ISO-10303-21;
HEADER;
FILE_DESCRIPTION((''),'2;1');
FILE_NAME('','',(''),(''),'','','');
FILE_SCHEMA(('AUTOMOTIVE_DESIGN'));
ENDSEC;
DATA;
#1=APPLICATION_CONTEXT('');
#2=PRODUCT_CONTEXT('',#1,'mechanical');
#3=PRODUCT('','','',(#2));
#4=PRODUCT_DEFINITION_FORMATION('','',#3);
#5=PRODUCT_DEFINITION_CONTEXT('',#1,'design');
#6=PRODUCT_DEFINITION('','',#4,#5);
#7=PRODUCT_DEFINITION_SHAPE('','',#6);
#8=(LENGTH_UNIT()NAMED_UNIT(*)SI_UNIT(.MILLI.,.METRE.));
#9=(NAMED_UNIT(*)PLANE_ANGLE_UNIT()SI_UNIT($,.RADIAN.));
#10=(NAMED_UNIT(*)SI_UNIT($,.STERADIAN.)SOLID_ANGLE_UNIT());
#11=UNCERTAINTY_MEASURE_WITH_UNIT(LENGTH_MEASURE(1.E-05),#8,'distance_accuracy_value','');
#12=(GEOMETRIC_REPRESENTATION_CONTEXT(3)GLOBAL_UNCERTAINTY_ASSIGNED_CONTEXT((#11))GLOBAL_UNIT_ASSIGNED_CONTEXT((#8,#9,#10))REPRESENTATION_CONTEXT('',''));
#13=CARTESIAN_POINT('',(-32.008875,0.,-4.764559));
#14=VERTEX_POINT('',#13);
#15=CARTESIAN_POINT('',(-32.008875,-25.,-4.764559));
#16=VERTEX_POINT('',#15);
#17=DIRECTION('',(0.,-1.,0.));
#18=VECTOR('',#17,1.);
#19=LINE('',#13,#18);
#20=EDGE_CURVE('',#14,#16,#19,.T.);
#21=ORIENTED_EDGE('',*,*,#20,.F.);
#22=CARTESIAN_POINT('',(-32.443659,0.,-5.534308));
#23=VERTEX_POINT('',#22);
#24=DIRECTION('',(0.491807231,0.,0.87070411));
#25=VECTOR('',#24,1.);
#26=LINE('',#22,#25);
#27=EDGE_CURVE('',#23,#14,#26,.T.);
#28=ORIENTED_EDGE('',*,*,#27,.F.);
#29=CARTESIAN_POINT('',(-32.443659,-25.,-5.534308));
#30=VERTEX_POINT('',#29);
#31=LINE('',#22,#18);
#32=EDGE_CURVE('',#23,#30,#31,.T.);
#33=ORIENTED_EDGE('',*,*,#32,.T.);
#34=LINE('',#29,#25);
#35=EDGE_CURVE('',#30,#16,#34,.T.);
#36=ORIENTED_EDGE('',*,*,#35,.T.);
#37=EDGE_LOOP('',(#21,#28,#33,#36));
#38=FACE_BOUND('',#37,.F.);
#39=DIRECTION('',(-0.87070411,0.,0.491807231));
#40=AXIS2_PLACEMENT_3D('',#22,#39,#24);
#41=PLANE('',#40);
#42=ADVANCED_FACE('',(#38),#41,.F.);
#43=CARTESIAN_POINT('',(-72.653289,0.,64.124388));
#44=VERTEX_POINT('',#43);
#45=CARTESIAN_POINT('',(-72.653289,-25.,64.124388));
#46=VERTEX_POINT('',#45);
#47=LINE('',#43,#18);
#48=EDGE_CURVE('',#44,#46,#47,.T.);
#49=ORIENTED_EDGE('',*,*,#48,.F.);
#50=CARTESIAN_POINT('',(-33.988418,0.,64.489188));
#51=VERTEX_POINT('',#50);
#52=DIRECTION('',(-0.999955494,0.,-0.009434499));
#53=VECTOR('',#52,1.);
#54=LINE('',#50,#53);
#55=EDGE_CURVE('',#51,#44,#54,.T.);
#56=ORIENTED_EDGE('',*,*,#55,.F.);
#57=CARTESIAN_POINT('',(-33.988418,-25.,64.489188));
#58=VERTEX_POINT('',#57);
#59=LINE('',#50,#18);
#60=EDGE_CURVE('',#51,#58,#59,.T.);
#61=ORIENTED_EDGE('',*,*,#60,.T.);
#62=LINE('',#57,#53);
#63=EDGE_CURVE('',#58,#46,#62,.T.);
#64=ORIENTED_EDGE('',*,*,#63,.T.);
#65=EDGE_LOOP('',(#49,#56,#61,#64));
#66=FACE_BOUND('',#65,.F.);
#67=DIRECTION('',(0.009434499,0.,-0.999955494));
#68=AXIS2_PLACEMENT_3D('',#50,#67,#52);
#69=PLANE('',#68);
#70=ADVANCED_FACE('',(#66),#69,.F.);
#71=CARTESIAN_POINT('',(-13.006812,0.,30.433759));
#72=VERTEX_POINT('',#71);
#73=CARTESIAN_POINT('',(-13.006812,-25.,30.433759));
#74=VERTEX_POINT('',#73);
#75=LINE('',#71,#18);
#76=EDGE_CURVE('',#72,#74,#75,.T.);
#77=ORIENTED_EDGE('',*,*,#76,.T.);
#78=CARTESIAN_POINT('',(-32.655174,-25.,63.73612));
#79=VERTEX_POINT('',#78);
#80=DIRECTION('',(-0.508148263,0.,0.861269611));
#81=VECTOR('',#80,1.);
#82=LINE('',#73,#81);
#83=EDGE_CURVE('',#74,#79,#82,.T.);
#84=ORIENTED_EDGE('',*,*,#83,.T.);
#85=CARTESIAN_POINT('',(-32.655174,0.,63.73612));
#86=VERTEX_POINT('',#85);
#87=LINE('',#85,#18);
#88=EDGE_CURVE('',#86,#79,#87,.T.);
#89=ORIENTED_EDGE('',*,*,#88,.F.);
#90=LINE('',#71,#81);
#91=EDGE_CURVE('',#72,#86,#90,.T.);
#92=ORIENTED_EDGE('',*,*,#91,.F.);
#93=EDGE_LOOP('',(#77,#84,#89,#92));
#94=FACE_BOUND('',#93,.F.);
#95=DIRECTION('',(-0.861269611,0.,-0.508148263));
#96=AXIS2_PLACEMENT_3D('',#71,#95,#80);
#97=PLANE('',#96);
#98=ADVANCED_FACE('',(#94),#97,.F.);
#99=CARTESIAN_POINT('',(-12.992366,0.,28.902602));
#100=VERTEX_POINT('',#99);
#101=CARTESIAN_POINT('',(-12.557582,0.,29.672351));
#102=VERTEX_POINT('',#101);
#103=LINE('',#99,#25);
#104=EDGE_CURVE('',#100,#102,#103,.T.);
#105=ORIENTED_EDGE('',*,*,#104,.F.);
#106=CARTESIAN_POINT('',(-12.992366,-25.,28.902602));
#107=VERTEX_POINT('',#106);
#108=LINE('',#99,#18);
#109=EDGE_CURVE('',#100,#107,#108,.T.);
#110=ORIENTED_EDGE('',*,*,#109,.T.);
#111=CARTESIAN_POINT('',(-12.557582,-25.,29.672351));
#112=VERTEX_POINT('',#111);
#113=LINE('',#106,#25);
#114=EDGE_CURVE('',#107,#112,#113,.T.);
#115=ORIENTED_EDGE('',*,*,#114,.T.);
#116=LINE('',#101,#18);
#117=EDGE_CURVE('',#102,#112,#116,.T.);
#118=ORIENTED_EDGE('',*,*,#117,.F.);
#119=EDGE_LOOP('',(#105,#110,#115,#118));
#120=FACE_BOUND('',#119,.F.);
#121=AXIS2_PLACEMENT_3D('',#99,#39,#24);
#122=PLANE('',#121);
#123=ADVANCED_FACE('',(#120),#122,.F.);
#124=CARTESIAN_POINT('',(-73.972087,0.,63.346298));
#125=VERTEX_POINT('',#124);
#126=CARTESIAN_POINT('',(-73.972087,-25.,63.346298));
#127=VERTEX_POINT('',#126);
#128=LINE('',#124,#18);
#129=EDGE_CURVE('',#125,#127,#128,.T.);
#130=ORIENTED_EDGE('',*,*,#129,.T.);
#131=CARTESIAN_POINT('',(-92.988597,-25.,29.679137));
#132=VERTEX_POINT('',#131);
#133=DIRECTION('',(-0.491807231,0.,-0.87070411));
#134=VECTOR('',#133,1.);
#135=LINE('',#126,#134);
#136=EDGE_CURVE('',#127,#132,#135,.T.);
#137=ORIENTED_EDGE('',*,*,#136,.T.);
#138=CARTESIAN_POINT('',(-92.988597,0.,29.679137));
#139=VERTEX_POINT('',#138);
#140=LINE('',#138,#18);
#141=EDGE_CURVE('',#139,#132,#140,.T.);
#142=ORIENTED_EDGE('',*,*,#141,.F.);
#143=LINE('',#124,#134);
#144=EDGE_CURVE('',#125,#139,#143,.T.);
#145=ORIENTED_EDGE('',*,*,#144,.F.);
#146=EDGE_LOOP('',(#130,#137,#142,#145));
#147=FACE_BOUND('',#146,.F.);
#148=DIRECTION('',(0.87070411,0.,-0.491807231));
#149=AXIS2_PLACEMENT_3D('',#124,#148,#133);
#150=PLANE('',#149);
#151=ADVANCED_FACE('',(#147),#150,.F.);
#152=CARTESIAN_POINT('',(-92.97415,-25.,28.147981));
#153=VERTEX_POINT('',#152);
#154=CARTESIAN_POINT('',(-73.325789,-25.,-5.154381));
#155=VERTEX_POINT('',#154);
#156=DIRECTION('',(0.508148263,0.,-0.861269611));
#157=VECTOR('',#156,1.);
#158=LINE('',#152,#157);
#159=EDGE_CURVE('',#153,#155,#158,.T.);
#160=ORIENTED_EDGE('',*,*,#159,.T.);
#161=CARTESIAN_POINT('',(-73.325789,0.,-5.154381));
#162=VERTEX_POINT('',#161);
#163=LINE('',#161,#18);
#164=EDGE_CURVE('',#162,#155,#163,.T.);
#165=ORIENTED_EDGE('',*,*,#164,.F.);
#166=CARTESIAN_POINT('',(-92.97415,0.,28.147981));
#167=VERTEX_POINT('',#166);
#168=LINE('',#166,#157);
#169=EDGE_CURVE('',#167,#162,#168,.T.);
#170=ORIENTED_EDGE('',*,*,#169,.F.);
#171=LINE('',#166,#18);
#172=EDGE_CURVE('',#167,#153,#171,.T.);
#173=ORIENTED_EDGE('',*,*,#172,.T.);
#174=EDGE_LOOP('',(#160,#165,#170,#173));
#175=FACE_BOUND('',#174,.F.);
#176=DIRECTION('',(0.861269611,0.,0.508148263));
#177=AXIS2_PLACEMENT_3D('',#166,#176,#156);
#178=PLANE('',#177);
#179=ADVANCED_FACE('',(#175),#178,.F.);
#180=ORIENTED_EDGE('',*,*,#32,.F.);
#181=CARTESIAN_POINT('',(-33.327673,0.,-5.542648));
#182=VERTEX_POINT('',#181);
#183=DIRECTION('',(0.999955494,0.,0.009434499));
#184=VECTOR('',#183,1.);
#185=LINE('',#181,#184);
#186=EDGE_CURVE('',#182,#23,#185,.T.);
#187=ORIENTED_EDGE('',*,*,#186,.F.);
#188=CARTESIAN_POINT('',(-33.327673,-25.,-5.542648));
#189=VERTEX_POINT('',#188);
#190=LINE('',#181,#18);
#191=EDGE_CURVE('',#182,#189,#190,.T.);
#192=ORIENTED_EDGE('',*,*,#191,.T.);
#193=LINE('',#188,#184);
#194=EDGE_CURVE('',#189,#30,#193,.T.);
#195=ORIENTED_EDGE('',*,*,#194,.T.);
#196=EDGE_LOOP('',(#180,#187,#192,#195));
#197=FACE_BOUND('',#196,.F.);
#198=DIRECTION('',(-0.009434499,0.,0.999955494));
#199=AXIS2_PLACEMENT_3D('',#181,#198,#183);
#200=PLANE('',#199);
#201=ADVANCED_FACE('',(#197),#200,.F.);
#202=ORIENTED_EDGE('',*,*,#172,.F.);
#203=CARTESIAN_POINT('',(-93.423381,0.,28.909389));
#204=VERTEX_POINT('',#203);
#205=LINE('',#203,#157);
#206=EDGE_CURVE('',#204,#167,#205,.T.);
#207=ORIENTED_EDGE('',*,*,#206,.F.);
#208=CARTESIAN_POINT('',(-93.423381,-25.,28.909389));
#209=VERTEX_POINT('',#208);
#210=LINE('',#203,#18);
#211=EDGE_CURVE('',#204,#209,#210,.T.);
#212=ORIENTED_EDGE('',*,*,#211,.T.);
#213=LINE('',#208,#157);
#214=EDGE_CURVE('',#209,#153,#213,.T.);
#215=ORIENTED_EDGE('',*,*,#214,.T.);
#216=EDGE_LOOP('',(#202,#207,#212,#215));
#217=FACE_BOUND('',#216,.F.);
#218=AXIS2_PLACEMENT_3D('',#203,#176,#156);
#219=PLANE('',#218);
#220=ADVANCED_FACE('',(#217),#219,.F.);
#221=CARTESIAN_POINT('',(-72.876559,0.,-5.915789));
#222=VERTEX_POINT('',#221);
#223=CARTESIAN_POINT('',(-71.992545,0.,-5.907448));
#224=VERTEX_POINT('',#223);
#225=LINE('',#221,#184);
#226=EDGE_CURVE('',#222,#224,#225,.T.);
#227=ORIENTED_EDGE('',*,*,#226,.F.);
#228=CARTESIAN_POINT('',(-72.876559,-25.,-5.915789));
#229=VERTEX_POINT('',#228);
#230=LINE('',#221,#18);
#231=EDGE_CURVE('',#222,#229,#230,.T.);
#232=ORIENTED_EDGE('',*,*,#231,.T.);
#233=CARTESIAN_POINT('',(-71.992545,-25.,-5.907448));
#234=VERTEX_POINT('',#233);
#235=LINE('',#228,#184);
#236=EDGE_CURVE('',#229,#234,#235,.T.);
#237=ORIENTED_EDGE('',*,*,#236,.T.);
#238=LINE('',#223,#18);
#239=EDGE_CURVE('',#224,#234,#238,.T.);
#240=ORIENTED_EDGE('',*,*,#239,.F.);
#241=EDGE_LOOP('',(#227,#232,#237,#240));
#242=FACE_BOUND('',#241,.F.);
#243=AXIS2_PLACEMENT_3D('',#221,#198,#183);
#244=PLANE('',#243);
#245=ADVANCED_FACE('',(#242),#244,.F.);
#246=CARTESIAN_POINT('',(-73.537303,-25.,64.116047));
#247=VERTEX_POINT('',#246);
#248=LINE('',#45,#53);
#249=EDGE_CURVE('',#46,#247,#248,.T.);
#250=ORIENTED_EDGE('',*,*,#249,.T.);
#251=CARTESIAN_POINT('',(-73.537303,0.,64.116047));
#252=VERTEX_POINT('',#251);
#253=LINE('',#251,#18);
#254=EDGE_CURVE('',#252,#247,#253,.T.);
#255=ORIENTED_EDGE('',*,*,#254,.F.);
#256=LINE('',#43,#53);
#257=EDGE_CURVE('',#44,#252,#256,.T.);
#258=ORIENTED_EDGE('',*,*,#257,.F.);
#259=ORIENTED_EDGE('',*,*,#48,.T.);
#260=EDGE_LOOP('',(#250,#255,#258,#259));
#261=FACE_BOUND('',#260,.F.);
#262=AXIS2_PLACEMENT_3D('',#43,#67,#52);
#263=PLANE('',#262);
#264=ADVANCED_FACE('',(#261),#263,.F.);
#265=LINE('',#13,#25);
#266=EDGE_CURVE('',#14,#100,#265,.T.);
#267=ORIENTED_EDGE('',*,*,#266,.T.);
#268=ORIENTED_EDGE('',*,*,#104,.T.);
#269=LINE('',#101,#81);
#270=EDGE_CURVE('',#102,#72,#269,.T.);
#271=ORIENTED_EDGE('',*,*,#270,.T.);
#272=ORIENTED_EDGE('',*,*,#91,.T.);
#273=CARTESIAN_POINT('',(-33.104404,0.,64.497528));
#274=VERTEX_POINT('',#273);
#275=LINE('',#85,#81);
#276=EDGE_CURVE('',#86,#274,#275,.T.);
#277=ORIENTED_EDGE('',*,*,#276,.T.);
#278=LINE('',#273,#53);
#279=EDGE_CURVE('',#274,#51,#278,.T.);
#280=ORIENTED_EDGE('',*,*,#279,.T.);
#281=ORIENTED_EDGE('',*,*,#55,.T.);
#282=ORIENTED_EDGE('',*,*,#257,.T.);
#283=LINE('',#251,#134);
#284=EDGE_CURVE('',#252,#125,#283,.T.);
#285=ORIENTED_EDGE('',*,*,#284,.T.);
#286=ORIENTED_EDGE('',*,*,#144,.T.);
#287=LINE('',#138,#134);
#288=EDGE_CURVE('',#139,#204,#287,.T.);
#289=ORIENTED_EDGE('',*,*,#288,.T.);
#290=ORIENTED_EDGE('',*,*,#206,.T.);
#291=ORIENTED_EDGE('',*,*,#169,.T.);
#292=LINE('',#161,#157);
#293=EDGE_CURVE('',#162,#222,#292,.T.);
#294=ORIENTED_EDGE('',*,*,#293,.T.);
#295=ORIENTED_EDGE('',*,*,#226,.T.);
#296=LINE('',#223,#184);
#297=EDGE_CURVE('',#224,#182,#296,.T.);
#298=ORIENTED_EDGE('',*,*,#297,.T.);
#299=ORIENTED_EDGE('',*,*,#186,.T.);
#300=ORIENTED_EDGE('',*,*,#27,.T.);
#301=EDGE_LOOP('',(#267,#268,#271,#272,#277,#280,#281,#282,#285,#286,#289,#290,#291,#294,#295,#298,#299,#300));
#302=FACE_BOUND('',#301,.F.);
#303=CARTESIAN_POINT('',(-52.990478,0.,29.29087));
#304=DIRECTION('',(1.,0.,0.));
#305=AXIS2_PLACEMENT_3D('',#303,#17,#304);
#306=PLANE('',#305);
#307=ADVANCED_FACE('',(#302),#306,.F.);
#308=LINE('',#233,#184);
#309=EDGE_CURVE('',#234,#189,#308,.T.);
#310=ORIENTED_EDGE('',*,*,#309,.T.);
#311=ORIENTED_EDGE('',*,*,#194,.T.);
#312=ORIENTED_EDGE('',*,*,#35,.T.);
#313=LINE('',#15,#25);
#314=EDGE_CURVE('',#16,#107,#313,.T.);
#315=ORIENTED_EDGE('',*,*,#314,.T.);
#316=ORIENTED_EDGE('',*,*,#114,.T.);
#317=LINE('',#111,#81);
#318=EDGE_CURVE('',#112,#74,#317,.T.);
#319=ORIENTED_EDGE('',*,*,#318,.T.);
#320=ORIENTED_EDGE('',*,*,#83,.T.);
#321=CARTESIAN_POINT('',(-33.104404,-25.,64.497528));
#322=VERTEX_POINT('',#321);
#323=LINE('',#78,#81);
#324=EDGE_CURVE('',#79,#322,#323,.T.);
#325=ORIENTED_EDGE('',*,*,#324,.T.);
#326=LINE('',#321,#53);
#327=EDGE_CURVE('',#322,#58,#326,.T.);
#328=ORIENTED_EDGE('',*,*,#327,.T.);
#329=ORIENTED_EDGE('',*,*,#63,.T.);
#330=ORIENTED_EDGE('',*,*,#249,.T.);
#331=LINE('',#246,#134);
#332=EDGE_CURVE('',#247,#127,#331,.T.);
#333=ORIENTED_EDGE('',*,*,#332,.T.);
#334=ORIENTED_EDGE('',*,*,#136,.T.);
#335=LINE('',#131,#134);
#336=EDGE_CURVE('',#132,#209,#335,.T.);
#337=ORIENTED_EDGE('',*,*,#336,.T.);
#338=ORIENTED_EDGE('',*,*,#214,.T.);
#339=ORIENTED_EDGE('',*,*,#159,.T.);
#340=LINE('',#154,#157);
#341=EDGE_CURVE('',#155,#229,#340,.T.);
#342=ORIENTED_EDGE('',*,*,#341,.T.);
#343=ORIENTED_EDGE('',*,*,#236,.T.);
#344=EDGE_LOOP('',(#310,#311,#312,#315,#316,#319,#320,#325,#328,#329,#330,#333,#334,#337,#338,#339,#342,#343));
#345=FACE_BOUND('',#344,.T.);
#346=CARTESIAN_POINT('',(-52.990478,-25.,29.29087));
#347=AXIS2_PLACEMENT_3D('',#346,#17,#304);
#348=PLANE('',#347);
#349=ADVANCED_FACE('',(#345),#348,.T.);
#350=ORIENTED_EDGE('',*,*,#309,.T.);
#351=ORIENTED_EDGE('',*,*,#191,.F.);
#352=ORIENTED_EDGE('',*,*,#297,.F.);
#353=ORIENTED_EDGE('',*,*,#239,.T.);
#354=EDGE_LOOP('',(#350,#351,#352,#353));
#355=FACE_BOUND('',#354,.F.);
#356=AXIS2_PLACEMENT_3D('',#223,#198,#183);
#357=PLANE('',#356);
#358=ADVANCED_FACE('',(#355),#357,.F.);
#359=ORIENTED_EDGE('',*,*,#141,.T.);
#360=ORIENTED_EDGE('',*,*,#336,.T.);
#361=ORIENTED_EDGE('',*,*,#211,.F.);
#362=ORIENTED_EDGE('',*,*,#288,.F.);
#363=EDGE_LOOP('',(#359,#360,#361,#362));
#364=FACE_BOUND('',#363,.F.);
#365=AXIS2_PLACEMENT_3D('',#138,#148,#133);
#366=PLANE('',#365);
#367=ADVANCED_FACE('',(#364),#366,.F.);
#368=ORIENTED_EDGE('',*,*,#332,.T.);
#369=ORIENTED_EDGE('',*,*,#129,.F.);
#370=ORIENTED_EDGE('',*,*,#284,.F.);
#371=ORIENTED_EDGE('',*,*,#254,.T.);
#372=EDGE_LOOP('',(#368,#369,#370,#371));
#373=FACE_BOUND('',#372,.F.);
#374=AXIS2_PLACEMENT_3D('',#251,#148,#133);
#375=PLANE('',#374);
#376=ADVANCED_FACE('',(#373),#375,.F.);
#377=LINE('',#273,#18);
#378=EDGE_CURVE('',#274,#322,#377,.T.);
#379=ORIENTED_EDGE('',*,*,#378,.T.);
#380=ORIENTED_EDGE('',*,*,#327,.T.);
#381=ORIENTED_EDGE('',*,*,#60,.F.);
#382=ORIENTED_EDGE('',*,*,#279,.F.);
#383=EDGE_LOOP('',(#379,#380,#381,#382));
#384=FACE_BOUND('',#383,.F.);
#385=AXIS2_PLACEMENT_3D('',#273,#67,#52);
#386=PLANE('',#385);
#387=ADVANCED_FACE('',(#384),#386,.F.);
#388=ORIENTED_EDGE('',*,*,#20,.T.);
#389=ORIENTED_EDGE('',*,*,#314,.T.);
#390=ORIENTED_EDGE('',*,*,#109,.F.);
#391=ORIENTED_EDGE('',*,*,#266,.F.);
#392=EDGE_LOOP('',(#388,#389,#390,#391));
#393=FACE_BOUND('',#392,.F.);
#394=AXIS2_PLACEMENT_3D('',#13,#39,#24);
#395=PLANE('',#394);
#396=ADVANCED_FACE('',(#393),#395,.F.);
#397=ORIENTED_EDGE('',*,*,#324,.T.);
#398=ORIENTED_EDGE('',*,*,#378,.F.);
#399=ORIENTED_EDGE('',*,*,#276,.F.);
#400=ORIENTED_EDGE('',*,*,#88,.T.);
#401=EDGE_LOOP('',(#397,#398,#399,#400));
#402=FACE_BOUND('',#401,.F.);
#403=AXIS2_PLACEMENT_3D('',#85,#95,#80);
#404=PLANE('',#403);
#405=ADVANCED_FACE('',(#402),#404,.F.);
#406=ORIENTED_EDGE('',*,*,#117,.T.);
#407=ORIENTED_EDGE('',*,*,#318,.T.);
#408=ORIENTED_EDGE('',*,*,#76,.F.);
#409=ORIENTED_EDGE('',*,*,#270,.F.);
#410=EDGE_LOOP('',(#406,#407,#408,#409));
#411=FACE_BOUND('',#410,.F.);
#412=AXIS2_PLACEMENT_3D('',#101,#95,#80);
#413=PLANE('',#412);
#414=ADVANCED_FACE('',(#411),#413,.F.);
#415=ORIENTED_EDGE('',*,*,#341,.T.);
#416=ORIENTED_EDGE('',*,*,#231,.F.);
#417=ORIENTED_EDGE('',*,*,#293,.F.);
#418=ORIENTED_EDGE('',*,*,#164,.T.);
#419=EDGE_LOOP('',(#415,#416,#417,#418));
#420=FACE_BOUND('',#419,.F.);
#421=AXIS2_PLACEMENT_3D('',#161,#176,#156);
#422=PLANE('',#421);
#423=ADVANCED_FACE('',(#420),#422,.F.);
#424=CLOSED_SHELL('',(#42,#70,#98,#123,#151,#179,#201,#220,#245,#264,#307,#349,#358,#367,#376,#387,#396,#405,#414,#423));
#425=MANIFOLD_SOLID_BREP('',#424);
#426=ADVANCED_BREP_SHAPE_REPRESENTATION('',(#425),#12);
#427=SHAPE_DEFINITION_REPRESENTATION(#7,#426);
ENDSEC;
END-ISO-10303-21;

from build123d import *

# Parameters (mm, degrees)
F1_DEPTH = 25


with BuildPart() as f1:
    # F0 (on Front) → F1 (new body)
    with BuildSketch(Plane.XZ):
        with BuildLine():
            ThreePointArc((-12.9923656989, 28.902602186), (-12.9909523706, 29.0967337225), (-12.9904812574, 29.290869832))
            ThreePointArc((-12.9904812574, 29.290869832), (-12.9945641617, 29.8623728238), (-13.0068120409, 30.4337591459))
            Line((-13.0068120409, 30.4337591459), (-32.6551738333, 63.7361201862))
            ThreePointArc((-32.6551738333, 63.7361201862), (-33.3181920134, 64.1190342382), (-33.9884178287, 64.489187767))
            Line((-33.9884178287, 64.489187767), (-72.6532893918, 64.1243878322))
            ThreePointArc((-72.6532893918, 64.1243878322), (-73.3164117783, 63.741654271), (-73.9720870452, 63.3462984531))
            Line((-73.9720870452, 63.3462984531), (-92.988596816, 29.679137478))
            ThreePointArc((-92.988596816, 29.679137478), (-92.9887010223, 28.9134898649), (-92.974150474, 28.1479805181))
            Line((-92.974150474, 28.1479805181), (-73.3257886816, -5.1543805222))
            ThreePointArc((-73.3257886816, -5.1543805222), (-72.6627705014, -5.5372945741), (-71.9925446861, -5.9074481029))
            Line((-71.9925446861, -5.9074481029), (-33.3276731231, -5.5426481682))
            ThreePointArc((-33.3276731231, -5.5426481682), (-32.6645507366, -5.1599146069), (-32.0088754696, -4.764558789))
            Line((-32.0088754696, -4.764558789), (-12.9923656989, 28.902602186))
        make_face()
        with BuildLine():
            ThreePointArc((-13.0068120409, 30.4337591459), (-12.9945641617, 29.8623728238), (-12.9904812574, 29.290869832))
            ThreePointArc((-12.9904812574, 29.290869832), (-12.9909523706, 29.0967337225), (-12.9923656989, 28.902602186))
            Line((-12.9923656989, 28.902602186), (-12.5575819284, 29.6723509657))
            Line((-12.5575819284, 29.6723509657), (-13.0068120409, 30.4337591459))
        make_face()
        with BuildLine():
            ThreePointArc((-33.9884178287, 64.489187767), (-33.3181920134, 64.1190342382), (-32.6551738333, 63.7361201862))
            Line((-32.6551738333, 63.7361201862), (-33.1044039458, 64.4975283665))
            Line((-33.1044039458, 64.4975283665), (-33.9884178287, 64.489187767))
        make_face()
        with BuildLine():
            Line((-32.4436592401, -5.5343075687), (-32.0088754696, -4.764558789))
            ThreePointArc((-32.0088754696, -4.764558789), (-32.6645507366, -5.1599146069), (-33.3276731231, -5.5426481682))
            Line((-33.3276731231, -5.5426481682), (-32.4436592401, -5.5343075687))
        make_face()
        with BuildLine():
            ThreePointArc((-73.9720870452, 63.3462984531), (-73.3164117783, 63.741654271), (-72.6532893918, 64.1243878322))
            Line((-72.6532893918, 64.1243878322), (-73.5373032748, 64.1160472328))
            Line((-73.5373032748, 64.1160472328), (-73.9720870452, 63.3462984531))
        make_face()
        with BuildLine():
            Line((-72.8765585691, -5.9157887024), (-71.9925446861, -5.9074481029))
            ThreePointArc((-71.9925446861, -5.9074481029), (-72.6627705014, -5.5372945741), (-73.3257886816, -5.1543805222))
            Line((-73.3257886816, -5.1543805222), (-72.8765585691, -5.9157887024))
        make_face()
        with BuildLine():
            ThreePointArc((-92.974150474, 28.1479805181), (-92.9887010223, 28.9134898649), (-92.988596816, 29.679137478))
            Line((-92.988596816, 29.679137478), (-93.4233805865, 28.9093886984))
            Line((-93.4233805865, 28.9093886984), (-92.974150474, 28.1479805181))
        make_face()
    extrude(amount=F1_DEPTH)


solid = f1.part
